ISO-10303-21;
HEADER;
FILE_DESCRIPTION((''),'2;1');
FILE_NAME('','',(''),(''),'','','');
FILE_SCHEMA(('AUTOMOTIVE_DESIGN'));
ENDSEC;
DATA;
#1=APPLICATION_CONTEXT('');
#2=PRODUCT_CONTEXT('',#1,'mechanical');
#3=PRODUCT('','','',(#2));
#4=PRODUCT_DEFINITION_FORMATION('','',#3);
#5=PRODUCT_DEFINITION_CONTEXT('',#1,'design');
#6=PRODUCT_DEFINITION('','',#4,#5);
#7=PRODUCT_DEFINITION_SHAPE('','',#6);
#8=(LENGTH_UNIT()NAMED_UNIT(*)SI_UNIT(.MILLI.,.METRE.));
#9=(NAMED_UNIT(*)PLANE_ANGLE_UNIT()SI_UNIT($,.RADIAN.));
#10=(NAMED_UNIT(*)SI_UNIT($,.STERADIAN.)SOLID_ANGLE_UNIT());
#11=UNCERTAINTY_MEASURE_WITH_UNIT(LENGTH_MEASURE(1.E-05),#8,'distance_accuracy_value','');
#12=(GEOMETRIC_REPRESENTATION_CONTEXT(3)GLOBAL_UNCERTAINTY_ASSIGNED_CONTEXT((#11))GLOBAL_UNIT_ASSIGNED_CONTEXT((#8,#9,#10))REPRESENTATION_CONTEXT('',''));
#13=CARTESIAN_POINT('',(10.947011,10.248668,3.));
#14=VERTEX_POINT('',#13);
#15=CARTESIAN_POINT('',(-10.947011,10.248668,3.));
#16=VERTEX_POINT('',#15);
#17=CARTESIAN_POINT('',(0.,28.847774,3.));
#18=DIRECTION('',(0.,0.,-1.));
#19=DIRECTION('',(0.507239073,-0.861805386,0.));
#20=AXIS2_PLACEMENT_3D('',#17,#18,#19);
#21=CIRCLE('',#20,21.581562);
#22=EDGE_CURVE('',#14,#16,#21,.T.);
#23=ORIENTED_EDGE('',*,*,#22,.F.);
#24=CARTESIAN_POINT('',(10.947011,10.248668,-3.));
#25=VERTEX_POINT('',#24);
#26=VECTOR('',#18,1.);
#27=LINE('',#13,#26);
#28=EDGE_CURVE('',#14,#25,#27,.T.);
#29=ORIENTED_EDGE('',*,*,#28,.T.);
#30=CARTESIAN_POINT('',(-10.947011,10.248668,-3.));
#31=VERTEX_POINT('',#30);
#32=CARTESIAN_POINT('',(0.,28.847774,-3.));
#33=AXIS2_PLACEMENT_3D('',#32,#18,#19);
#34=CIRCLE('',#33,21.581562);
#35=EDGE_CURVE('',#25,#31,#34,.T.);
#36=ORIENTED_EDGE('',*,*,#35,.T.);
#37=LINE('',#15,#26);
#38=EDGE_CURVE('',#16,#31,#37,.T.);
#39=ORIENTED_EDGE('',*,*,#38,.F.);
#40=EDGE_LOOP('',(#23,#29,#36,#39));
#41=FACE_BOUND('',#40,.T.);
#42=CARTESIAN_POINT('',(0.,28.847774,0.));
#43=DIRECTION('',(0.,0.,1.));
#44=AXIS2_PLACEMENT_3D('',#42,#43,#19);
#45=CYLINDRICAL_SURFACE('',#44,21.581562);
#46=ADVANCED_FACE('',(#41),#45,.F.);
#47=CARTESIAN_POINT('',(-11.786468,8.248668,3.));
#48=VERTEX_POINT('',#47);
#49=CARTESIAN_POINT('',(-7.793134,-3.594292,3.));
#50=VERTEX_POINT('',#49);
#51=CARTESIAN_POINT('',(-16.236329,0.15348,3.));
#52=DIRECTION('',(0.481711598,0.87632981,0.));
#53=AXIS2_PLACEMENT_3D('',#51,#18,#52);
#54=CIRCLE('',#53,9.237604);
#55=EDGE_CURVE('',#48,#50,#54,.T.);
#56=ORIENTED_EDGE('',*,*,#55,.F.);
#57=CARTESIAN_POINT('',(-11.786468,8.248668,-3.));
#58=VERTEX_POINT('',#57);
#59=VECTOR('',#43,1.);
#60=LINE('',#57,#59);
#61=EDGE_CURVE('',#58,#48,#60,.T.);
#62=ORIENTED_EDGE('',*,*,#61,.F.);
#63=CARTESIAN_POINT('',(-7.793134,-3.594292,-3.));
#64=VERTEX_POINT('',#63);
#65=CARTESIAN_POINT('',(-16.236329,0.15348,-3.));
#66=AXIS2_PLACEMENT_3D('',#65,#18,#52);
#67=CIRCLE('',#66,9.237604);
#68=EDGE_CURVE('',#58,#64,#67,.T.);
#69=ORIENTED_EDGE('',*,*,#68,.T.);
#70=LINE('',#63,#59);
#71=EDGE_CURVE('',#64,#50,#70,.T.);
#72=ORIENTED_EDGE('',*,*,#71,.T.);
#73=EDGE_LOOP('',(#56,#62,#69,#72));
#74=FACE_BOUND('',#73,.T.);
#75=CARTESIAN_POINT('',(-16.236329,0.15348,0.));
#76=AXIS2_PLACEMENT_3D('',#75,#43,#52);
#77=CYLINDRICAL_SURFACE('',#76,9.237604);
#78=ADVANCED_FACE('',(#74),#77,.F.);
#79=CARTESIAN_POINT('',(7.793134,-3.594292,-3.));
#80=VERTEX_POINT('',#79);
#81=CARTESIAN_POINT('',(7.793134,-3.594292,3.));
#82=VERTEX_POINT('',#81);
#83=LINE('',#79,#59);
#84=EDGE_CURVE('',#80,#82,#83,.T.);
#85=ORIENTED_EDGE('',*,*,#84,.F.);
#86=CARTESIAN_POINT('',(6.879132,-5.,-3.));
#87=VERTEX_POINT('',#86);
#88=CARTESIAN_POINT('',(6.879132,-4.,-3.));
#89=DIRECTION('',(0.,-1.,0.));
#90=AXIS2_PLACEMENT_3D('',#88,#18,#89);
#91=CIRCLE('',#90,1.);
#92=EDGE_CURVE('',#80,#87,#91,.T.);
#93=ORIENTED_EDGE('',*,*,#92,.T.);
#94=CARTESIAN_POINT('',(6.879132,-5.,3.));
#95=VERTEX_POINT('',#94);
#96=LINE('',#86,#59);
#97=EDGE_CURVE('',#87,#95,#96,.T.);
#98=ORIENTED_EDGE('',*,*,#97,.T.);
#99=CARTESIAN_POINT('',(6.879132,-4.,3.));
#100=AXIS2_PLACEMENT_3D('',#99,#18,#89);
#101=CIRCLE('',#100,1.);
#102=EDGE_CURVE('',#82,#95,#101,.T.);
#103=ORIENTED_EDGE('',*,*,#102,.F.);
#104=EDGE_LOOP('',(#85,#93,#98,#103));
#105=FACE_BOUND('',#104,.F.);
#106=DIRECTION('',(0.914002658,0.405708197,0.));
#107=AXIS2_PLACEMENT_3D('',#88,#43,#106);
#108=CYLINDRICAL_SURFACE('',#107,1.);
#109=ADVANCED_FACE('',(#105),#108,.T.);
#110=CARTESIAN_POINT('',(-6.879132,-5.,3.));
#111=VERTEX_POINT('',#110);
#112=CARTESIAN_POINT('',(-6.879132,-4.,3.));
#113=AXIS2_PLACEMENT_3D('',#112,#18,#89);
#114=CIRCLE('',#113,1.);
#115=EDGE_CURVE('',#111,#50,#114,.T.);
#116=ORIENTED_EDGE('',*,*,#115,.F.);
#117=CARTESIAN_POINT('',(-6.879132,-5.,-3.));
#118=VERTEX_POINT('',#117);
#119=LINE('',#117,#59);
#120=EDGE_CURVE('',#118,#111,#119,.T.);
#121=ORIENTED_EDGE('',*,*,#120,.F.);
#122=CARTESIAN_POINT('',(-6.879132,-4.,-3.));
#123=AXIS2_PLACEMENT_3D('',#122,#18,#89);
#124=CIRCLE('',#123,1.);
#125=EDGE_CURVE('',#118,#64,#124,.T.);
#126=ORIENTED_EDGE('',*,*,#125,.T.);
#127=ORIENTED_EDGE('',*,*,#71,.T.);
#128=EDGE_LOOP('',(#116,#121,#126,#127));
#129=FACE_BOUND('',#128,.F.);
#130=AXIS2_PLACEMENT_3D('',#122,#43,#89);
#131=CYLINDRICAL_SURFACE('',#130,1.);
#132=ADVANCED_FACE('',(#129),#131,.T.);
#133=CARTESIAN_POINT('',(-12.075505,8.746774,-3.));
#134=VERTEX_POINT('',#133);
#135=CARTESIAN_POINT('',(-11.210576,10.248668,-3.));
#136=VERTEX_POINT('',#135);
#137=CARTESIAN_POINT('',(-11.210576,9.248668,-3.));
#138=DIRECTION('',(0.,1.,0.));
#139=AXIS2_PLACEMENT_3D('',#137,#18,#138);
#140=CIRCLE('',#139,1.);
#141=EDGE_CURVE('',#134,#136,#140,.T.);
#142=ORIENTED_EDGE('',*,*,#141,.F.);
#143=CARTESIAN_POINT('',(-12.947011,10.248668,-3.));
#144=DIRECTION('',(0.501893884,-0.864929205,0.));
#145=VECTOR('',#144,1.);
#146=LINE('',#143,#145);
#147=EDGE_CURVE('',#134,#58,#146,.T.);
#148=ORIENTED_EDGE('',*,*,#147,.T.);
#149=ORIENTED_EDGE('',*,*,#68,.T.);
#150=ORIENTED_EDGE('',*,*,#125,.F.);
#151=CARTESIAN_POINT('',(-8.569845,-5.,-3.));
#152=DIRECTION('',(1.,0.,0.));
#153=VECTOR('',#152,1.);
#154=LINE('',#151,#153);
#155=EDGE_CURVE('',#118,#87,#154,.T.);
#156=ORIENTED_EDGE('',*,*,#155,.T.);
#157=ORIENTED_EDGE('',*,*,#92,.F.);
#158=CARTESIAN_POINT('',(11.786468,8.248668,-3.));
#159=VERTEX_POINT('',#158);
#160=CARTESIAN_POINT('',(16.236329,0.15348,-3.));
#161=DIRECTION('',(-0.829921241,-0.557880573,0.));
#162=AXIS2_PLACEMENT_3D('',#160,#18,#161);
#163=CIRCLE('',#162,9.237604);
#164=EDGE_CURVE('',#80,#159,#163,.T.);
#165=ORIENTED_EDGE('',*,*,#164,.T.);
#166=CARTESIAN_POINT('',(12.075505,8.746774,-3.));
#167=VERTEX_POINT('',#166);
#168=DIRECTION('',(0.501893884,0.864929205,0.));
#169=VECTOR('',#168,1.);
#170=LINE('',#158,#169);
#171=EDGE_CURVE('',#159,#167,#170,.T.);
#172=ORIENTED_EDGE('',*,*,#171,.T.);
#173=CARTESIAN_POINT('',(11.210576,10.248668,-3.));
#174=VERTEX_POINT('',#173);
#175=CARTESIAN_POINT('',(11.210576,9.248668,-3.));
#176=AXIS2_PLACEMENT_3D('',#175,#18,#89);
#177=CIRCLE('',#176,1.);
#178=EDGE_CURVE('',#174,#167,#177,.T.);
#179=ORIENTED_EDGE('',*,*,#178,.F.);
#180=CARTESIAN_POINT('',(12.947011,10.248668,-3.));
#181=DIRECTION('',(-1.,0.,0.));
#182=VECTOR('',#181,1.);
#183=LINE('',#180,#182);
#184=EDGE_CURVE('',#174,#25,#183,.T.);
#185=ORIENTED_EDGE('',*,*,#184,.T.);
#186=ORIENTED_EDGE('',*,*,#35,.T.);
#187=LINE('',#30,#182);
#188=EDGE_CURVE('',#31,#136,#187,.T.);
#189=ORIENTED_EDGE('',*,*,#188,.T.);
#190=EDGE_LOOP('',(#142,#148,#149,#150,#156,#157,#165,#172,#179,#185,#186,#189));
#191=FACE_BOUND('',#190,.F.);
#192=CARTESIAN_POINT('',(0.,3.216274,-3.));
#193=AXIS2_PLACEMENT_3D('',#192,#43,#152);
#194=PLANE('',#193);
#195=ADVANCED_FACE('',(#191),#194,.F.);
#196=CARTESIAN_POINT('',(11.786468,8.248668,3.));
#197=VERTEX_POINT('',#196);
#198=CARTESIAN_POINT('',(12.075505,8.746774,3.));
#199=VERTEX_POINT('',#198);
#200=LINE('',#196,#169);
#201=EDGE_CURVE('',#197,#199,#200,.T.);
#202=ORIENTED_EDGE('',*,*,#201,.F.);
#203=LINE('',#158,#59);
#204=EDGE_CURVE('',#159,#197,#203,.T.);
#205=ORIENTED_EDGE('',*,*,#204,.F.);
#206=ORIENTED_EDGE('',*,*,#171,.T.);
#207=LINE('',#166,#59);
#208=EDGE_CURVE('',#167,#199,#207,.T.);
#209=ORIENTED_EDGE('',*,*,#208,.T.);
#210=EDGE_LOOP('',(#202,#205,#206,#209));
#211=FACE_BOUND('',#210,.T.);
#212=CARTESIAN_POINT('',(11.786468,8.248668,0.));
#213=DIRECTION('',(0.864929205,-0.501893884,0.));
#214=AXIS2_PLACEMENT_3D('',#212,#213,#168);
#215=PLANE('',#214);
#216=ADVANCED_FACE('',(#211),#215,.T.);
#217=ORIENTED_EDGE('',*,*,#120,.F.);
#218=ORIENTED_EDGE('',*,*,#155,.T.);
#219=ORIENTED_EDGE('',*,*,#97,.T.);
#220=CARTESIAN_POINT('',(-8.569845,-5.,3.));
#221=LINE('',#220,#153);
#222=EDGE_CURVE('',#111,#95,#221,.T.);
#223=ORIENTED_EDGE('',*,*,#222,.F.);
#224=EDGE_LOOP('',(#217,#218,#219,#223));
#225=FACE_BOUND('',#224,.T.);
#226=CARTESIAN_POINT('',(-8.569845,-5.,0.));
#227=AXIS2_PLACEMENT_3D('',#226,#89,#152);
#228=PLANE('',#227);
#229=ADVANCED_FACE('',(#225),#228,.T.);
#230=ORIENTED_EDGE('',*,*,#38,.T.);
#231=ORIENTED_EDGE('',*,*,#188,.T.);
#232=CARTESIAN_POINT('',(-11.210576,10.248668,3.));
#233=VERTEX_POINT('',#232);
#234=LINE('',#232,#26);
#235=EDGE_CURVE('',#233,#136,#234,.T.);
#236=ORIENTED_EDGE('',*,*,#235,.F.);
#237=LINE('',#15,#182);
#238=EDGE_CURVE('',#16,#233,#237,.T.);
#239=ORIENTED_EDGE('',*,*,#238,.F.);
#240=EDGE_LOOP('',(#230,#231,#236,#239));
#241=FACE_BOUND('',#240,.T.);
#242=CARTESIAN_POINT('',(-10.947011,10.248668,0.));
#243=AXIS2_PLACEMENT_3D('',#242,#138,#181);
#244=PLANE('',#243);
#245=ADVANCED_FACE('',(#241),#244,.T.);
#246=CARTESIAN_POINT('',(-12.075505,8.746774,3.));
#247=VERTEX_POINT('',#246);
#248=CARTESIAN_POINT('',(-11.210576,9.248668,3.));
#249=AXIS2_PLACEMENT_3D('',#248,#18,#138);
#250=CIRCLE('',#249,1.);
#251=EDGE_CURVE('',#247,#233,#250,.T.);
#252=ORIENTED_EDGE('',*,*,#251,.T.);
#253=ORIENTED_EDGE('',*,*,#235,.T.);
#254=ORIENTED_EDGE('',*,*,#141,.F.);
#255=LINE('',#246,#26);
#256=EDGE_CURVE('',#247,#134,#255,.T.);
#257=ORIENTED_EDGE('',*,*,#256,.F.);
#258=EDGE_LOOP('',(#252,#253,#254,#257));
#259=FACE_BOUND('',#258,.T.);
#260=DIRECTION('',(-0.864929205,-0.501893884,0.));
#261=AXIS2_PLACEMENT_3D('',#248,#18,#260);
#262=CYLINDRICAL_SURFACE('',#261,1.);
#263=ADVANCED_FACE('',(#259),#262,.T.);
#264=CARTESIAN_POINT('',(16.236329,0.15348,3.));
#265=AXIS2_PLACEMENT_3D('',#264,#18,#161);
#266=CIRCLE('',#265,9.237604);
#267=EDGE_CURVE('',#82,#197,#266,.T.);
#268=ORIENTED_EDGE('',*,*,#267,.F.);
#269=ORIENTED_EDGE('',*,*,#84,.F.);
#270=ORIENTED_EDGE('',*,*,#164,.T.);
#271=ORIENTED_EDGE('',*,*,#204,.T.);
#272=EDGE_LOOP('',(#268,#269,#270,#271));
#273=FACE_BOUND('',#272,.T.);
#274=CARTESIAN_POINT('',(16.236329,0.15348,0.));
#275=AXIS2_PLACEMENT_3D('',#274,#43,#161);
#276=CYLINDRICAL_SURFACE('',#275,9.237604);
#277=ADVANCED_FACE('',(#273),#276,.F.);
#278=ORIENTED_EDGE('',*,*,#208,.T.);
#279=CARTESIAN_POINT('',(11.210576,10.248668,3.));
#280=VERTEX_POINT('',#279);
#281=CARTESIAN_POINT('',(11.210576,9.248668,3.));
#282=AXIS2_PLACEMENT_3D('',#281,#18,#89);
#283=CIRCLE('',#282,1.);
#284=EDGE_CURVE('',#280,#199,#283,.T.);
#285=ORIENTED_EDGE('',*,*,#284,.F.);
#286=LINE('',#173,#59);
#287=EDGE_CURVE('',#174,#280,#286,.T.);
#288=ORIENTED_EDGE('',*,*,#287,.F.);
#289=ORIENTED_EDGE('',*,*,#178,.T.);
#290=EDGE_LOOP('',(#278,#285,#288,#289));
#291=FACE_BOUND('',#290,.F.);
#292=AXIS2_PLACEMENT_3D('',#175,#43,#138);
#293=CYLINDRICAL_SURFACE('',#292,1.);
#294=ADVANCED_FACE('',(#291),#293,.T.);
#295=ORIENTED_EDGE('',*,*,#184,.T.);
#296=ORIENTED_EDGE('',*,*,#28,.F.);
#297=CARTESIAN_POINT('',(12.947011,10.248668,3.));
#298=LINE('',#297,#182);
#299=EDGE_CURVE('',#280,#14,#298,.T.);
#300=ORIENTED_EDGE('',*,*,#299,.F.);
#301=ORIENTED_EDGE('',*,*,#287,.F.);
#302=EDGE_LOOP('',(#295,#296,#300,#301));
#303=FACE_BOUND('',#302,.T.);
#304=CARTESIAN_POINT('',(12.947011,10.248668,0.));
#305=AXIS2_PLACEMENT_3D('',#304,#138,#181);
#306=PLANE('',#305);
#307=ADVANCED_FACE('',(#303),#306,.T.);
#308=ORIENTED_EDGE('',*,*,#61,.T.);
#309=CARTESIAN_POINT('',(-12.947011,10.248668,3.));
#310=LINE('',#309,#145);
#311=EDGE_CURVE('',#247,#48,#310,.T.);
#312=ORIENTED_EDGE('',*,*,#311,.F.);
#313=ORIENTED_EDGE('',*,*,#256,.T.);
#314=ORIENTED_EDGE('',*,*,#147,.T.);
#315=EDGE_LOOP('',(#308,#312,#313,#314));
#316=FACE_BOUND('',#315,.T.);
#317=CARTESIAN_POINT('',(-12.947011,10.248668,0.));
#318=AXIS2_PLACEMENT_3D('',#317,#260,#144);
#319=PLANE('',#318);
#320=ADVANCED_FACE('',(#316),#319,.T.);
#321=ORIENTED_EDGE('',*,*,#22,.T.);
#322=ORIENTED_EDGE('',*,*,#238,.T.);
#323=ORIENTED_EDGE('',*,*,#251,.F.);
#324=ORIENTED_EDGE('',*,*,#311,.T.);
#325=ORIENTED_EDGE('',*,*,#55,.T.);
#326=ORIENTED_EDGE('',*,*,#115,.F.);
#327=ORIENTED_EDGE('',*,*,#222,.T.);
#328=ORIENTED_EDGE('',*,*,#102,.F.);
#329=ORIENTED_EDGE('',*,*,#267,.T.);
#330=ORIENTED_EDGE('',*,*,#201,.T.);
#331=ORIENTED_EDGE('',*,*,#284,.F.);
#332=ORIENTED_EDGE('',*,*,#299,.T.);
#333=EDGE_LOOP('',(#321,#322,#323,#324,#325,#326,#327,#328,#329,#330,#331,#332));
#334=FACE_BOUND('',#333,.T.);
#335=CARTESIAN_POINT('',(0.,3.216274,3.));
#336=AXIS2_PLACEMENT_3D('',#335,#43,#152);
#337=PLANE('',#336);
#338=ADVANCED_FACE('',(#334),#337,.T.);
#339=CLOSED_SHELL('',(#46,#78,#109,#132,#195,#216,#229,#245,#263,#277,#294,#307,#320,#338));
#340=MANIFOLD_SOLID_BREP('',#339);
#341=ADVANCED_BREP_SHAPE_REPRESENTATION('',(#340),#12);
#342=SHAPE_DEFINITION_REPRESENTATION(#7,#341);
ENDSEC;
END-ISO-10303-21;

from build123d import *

# Parameters (mm, degrees)
F1_DEPTH = 3
F2_R     = 1


# Not quite as in the source:
# - a feature names something its author has since deleted; it is built from what else it names


with BuildPart() as f1:
    # F0 (on Top) → F1 (new body, symmetric)
    with BuildSketch(Plane.XY):
        with BuildLine():
            Line((-12.9470113486, 10.248668018), (-11.7864680784, 8.248668018))
            ThreePointArc((-11.7864680784, 8.248668018), (-7.2595115052, 2.3329471863), (-8.5698451786, -5))
            Line((-8.5698451786, -5), (8.5698451786, -5))
            ThreePointArc((8.5698451786, -5), (7.2595115052, 2.3329471863), (11.7864680784, 8.248668018))
            Line((11.7864680784, 8.248668018), (12.9470113486, 10.248668018))
            Line((12.9470113486, 10.248668018), (10.9470113486, 10.248668018))
            ThreePointArc((10.9470113486, 10.248668018), (0, 7.2662124228), (-10.9470113486, 10.248668018))
            Line((-10.9470113486, 10.248668018), (-12.9470113486, 10.248668018))
        make_face()
    extrude(amount=F1_DEPTH, both=True)

    # F2
    f2_edges = [f1.edges().sort_by_distance(p)[0] for p in [
        (-12.947011, 10.248668, 0),
        (12.947011, 10.248668, 0),
        (-8.569845, -5, 0),
        (8.569845, -5, 0),
    ]]
    fillet(f2_edges, radius=F2_R)


solid = f1.part
